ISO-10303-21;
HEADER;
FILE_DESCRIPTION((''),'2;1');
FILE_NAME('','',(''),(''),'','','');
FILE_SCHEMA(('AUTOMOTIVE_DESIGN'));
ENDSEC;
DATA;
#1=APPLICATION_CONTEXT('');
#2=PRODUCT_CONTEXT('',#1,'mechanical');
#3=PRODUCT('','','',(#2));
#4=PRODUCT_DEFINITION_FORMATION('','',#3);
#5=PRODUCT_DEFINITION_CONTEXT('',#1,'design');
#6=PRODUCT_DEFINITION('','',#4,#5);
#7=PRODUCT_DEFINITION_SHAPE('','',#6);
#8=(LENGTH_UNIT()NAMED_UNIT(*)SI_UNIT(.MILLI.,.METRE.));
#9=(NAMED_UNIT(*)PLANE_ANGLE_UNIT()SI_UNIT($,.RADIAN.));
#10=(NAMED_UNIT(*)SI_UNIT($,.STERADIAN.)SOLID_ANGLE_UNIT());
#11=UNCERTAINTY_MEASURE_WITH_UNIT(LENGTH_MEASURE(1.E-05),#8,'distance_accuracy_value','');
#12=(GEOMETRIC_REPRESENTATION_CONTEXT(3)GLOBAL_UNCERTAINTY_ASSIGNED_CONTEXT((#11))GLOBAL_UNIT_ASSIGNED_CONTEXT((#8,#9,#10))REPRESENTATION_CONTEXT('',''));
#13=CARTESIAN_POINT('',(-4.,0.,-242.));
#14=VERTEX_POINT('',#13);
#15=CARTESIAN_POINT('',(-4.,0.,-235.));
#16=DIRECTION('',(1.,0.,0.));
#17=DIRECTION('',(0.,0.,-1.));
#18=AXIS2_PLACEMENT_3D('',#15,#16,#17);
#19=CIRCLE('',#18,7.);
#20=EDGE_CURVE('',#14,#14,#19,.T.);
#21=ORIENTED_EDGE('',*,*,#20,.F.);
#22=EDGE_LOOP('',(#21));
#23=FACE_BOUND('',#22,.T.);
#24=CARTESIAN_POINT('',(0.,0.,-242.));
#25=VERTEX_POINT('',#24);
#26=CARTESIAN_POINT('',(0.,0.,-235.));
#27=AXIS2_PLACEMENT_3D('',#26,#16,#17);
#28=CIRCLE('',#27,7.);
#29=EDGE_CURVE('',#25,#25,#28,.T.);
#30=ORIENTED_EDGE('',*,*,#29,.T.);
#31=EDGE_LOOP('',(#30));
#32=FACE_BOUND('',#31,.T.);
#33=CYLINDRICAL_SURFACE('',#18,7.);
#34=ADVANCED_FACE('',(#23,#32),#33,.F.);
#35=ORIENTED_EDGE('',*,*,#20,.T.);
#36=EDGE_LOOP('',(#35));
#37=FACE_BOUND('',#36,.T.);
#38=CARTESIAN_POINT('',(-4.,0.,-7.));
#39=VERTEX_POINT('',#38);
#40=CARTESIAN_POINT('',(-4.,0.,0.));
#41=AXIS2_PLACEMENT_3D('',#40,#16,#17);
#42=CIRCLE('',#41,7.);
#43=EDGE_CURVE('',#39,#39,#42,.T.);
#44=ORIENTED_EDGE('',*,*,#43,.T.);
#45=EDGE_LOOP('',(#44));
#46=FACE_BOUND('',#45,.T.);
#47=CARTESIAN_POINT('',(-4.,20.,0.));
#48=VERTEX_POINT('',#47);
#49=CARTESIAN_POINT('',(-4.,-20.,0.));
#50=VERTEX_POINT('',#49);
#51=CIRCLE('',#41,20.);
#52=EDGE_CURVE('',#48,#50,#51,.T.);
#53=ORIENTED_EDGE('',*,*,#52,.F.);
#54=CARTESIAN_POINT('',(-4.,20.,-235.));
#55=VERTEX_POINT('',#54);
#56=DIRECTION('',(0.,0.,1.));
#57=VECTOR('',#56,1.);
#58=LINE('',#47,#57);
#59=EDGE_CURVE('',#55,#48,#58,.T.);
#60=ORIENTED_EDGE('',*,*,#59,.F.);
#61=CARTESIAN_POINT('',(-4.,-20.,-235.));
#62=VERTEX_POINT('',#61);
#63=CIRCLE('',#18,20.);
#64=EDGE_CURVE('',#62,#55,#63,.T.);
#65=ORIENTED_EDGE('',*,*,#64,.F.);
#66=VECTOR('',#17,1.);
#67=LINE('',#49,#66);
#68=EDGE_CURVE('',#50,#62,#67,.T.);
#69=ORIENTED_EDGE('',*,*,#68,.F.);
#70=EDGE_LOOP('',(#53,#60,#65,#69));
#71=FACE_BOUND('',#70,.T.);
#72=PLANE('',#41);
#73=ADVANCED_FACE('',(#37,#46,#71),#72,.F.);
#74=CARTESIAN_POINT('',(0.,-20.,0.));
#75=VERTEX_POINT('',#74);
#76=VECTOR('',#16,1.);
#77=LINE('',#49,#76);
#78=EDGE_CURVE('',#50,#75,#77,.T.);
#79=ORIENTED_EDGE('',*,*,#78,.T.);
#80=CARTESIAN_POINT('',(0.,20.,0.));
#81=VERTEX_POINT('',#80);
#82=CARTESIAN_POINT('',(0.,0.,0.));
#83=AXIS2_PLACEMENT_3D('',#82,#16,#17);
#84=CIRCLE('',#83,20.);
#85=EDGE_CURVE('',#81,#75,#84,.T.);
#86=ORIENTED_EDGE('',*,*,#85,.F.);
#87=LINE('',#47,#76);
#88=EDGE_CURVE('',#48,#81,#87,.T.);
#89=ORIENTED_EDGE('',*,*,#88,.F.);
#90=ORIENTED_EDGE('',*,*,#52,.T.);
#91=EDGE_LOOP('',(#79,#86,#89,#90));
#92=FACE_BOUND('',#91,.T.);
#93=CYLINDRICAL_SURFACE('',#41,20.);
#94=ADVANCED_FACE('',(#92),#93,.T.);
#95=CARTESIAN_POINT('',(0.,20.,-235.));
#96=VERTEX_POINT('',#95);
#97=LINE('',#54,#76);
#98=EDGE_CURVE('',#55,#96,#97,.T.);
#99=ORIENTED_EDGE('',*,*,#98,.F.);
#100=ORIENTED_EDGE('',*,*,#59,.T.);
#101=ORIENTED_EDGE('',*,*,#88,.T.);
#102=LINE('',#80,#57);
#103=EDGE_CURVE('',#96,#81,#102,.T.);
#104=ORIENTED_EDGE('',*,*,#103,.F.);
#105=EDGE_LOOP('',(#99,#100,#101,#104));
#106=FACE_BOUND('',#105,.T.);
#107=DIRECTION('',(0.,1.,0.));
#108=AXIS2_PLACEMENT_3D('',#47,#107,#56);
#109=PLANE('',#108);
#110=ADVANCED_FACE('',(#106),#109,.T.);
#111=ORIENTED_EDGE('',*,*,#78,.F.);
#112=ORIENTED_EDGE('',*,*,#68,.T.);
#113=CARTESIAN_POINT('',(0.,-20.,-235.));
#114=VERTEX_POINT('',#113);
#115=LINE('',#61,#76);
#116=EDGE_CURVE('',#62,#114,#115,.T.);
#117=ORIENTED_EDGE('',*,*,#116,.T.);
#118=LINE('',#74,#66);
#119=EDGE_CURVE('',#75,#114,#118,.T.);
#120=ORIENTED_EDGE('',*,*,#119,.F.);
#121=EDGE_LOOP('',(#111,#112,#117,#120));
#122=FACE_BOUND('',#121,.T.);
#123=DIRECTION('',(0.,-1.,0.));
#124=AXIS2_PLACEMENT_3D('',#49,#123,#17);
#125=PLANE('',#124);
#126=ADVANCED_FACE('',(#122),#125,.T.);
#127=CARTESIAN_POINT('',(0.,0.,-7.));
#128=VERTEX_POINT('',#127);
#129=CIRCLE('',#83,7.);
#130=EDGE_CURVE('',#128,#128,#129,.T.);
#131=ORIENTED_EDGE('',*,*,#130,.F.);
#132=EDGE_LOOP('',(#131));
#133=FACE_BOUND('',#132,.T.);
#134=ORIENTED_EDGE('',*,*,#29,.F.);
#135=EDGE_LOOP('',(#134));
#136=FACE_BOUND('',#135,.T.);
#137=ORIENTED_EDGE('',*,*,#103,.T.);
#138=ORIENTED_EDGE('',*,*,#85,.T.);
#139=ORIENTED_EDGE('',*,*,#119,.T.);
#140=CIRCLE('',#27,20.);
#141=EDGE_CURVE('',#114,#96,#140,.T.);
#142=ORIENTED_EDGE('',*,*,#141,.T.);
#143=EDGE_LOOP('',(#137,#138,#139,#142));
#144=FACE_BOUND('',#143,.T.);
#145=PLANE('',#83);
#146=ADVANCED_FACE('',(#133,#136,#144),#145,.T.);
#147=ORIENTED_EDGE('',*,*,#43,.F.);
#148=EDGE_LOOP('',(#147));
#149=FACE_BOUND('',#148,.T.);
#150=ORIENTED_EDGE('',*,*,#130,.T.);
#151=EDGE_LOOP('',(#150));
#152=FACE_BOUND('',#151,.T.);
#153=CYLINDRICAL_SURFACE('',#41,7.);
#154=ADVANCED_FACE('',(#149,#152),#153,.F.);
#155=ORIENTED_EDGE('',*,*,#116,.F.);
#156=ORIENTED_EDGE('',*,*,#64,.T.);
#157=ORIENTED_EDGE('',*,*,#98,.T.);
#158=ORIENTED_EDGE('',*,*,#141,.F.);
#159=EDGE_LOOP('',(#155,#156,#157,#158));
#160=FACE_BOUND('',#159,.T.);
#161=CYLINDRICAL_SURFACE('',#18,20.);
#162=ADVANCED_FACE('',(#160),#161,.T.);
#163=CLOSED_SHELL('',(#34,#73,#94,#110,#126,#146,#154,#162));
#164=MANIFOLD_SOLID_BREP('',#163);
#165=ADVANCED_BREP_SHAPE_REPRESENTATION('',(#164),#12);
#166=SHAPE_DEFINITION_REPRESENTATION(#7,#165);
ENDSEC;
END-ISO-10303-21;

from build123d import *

# Parameters (mm, degrees)
SKETCH_1_R             = 7
SM_BASE_FLANGE_1_DEPTH = 4


# Sheet-metal steps are written as plain solids
with BuildPart() as part:
    # Sketch 1 → Базовая кромка1 (new body)
    with BuildSketch(Plane(origin=(0, 0, 0), x_dir=(0, 0, -1), z_dir=(1, 0, 0))):
        with BuildLine():
            Line((0, 20), (235, 20))
            ThreePointArc((235, 20), (255, 0), (235, -20))
            Line((235, -20), (0, -20))
            ThreePointArc((0, -20), (-20, 0), (0, 20))
        make_face()
        Circle(SKETCH_1_R, mode=Mode.SUBTRACT)
        with Locations((235, 0)):
            Circle(SKETCH_1_R, mode=Mode.SUBTRACT)
    extrude(amount=-SM_BASE_FLANGE_1_DEPTH)


solid = part.part
